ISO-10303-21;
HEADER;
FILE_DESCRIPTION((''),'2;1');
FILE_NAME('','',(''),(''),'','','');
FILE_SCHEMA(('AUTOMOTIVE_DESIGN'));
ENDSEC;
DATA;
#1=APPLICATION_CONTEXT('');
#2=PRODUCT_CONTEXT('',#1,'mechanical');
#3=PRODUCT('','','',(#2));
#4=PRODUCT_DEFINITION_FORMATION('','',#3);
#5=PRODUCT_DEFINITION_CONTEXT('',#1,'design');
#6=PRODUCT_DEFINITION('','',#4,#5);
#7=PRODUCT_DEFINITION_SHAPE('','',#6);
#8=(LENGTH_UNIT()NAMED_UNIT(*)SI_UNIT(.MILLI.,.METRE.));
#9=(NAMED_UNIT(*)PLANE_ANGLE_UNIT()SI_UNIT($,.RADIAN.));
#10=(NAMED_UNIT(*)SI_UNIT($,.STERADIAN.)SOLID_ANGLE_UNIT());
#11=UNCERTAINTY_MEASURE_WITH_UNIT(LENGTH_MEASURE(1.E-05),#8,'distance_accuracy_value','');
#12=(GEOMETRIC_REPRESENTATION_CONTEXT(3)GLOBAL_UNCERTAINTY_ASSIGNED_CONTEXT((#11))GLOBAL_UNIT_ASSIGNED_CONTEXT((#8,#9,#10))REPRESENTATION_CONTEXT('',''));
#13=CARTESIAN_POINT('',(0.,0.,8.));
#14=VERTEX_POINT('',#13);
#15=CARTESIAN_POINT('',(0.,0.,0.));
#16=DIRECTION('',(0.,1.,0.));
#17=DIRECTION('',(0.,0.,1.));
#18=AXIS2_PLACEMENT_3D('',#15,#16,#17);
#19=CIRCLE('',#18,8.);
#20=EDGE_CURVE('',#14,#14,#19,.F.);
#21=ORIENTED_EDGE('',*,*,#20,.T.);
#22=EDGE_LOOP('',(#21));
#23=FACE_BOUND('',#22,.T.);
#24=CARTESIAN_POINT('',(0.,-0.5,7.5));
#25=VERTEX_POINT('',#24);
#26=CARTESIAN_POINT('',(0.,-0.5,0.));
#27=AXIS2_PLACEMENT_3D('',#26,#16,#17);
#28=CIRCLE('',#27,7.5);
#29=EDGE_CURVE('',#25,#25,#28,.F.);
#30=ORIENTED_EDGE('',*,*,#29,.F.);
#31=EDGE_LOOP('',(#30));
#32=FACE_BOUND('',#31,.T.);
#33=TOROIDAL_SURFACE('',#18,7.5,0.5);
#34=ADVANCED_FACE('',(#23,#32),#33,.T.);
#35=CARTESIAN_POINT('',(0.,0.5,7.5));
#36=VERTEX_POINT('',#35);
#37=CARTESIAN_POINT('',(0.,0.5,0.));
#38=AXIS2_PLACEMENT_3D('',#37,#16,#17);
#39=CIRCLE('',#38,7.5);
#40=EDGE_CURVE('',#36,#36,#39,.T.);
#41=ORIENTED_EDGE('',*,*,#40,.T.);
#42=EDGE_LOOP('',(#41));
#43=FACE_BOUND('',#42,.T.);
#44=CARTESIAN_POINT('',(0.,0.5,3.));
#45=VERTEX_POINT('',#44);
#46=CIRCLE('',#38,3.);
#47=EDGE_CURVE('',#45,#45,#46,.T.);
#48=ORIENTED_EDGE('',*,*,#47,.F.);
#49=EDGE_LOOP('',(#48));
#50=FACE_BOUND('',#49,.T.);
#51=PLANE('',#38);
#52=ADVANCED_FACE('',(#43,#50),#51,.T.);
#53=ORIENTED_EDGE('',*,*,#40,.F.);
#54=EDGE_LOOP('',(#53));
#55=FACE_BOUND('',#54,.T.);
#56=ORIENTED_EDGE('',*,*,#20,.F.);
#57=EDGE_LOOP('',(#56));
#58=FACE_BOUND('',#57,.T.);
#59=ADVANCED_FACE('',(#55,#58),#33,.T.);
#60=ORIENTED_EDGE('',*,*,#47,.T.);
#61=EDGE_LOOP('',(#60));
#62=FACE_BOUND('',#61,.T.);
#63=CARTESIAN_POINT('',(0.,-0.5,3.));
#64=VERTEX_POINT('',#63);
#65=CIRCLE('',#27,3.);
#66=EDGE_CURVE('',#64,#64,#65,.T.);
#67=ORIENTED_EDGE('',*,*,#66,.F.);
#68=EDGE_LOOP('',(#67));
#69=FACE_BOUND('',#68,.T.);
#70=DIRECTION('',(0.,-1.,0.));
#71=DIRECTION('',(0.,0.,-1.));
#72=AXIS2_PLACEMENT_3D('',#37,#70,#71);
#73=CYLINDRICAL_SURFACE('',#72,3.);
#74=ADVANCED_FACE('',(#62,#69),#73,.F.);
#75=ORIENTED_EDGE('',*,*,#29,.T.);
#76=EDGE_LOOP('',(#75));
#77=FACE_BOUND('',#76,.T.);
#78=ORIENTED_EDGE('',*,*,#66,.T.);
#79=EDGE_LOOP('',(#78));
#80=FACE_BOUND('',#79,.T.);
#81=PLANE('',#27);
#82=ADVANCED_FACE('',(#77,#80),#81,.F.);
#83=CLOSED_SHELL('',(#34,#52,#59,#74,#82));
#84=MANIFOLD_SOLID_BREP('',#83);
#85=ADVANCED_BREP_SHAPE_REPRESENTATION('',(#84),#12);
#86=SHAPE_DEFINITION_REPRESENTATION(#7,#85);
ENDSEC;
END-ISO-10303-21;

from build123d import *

# Parameters (mm, degrees)
SKETCH_1_R      = 8
SKETCH_1_R_2    = 3
EXTRUDE_1_DEPTH = 0.5
FILLET_1_R      = 0.5


with BuildPart() as part:
    # 草图1 → 凸台-拉伸1 (new, symmetric)
    with BuildSketch(Plane(origin=(0, 0, 0), x_dir=(1, 0, 0), z_dir=(0, 1, 0))):
        with Locations(Location((0, 0, 0), (0, 0, 270))):
            Circle(SKETCH_1_R)
        with Locations(Location((0, 0, 0), (0, 0, 270))):
            Circle(SKETCH_1_R_2, mode=Mode.SUBTRACT)
    extrude(amount=EXTRUDE_1_DEPTH, both=True)

    # 圆角1
    fillet_1_edges = [part.edges().sort_by_distance(p)[0] for p in [
        (0, -0.5, -8),
        (0, 0.5, -8),
    ]]
    fillet(fillet_1_edges, radius=FILLET_1_R - 0.0001)  # a hair under: the kernel refuses the full size


solid = part.part
